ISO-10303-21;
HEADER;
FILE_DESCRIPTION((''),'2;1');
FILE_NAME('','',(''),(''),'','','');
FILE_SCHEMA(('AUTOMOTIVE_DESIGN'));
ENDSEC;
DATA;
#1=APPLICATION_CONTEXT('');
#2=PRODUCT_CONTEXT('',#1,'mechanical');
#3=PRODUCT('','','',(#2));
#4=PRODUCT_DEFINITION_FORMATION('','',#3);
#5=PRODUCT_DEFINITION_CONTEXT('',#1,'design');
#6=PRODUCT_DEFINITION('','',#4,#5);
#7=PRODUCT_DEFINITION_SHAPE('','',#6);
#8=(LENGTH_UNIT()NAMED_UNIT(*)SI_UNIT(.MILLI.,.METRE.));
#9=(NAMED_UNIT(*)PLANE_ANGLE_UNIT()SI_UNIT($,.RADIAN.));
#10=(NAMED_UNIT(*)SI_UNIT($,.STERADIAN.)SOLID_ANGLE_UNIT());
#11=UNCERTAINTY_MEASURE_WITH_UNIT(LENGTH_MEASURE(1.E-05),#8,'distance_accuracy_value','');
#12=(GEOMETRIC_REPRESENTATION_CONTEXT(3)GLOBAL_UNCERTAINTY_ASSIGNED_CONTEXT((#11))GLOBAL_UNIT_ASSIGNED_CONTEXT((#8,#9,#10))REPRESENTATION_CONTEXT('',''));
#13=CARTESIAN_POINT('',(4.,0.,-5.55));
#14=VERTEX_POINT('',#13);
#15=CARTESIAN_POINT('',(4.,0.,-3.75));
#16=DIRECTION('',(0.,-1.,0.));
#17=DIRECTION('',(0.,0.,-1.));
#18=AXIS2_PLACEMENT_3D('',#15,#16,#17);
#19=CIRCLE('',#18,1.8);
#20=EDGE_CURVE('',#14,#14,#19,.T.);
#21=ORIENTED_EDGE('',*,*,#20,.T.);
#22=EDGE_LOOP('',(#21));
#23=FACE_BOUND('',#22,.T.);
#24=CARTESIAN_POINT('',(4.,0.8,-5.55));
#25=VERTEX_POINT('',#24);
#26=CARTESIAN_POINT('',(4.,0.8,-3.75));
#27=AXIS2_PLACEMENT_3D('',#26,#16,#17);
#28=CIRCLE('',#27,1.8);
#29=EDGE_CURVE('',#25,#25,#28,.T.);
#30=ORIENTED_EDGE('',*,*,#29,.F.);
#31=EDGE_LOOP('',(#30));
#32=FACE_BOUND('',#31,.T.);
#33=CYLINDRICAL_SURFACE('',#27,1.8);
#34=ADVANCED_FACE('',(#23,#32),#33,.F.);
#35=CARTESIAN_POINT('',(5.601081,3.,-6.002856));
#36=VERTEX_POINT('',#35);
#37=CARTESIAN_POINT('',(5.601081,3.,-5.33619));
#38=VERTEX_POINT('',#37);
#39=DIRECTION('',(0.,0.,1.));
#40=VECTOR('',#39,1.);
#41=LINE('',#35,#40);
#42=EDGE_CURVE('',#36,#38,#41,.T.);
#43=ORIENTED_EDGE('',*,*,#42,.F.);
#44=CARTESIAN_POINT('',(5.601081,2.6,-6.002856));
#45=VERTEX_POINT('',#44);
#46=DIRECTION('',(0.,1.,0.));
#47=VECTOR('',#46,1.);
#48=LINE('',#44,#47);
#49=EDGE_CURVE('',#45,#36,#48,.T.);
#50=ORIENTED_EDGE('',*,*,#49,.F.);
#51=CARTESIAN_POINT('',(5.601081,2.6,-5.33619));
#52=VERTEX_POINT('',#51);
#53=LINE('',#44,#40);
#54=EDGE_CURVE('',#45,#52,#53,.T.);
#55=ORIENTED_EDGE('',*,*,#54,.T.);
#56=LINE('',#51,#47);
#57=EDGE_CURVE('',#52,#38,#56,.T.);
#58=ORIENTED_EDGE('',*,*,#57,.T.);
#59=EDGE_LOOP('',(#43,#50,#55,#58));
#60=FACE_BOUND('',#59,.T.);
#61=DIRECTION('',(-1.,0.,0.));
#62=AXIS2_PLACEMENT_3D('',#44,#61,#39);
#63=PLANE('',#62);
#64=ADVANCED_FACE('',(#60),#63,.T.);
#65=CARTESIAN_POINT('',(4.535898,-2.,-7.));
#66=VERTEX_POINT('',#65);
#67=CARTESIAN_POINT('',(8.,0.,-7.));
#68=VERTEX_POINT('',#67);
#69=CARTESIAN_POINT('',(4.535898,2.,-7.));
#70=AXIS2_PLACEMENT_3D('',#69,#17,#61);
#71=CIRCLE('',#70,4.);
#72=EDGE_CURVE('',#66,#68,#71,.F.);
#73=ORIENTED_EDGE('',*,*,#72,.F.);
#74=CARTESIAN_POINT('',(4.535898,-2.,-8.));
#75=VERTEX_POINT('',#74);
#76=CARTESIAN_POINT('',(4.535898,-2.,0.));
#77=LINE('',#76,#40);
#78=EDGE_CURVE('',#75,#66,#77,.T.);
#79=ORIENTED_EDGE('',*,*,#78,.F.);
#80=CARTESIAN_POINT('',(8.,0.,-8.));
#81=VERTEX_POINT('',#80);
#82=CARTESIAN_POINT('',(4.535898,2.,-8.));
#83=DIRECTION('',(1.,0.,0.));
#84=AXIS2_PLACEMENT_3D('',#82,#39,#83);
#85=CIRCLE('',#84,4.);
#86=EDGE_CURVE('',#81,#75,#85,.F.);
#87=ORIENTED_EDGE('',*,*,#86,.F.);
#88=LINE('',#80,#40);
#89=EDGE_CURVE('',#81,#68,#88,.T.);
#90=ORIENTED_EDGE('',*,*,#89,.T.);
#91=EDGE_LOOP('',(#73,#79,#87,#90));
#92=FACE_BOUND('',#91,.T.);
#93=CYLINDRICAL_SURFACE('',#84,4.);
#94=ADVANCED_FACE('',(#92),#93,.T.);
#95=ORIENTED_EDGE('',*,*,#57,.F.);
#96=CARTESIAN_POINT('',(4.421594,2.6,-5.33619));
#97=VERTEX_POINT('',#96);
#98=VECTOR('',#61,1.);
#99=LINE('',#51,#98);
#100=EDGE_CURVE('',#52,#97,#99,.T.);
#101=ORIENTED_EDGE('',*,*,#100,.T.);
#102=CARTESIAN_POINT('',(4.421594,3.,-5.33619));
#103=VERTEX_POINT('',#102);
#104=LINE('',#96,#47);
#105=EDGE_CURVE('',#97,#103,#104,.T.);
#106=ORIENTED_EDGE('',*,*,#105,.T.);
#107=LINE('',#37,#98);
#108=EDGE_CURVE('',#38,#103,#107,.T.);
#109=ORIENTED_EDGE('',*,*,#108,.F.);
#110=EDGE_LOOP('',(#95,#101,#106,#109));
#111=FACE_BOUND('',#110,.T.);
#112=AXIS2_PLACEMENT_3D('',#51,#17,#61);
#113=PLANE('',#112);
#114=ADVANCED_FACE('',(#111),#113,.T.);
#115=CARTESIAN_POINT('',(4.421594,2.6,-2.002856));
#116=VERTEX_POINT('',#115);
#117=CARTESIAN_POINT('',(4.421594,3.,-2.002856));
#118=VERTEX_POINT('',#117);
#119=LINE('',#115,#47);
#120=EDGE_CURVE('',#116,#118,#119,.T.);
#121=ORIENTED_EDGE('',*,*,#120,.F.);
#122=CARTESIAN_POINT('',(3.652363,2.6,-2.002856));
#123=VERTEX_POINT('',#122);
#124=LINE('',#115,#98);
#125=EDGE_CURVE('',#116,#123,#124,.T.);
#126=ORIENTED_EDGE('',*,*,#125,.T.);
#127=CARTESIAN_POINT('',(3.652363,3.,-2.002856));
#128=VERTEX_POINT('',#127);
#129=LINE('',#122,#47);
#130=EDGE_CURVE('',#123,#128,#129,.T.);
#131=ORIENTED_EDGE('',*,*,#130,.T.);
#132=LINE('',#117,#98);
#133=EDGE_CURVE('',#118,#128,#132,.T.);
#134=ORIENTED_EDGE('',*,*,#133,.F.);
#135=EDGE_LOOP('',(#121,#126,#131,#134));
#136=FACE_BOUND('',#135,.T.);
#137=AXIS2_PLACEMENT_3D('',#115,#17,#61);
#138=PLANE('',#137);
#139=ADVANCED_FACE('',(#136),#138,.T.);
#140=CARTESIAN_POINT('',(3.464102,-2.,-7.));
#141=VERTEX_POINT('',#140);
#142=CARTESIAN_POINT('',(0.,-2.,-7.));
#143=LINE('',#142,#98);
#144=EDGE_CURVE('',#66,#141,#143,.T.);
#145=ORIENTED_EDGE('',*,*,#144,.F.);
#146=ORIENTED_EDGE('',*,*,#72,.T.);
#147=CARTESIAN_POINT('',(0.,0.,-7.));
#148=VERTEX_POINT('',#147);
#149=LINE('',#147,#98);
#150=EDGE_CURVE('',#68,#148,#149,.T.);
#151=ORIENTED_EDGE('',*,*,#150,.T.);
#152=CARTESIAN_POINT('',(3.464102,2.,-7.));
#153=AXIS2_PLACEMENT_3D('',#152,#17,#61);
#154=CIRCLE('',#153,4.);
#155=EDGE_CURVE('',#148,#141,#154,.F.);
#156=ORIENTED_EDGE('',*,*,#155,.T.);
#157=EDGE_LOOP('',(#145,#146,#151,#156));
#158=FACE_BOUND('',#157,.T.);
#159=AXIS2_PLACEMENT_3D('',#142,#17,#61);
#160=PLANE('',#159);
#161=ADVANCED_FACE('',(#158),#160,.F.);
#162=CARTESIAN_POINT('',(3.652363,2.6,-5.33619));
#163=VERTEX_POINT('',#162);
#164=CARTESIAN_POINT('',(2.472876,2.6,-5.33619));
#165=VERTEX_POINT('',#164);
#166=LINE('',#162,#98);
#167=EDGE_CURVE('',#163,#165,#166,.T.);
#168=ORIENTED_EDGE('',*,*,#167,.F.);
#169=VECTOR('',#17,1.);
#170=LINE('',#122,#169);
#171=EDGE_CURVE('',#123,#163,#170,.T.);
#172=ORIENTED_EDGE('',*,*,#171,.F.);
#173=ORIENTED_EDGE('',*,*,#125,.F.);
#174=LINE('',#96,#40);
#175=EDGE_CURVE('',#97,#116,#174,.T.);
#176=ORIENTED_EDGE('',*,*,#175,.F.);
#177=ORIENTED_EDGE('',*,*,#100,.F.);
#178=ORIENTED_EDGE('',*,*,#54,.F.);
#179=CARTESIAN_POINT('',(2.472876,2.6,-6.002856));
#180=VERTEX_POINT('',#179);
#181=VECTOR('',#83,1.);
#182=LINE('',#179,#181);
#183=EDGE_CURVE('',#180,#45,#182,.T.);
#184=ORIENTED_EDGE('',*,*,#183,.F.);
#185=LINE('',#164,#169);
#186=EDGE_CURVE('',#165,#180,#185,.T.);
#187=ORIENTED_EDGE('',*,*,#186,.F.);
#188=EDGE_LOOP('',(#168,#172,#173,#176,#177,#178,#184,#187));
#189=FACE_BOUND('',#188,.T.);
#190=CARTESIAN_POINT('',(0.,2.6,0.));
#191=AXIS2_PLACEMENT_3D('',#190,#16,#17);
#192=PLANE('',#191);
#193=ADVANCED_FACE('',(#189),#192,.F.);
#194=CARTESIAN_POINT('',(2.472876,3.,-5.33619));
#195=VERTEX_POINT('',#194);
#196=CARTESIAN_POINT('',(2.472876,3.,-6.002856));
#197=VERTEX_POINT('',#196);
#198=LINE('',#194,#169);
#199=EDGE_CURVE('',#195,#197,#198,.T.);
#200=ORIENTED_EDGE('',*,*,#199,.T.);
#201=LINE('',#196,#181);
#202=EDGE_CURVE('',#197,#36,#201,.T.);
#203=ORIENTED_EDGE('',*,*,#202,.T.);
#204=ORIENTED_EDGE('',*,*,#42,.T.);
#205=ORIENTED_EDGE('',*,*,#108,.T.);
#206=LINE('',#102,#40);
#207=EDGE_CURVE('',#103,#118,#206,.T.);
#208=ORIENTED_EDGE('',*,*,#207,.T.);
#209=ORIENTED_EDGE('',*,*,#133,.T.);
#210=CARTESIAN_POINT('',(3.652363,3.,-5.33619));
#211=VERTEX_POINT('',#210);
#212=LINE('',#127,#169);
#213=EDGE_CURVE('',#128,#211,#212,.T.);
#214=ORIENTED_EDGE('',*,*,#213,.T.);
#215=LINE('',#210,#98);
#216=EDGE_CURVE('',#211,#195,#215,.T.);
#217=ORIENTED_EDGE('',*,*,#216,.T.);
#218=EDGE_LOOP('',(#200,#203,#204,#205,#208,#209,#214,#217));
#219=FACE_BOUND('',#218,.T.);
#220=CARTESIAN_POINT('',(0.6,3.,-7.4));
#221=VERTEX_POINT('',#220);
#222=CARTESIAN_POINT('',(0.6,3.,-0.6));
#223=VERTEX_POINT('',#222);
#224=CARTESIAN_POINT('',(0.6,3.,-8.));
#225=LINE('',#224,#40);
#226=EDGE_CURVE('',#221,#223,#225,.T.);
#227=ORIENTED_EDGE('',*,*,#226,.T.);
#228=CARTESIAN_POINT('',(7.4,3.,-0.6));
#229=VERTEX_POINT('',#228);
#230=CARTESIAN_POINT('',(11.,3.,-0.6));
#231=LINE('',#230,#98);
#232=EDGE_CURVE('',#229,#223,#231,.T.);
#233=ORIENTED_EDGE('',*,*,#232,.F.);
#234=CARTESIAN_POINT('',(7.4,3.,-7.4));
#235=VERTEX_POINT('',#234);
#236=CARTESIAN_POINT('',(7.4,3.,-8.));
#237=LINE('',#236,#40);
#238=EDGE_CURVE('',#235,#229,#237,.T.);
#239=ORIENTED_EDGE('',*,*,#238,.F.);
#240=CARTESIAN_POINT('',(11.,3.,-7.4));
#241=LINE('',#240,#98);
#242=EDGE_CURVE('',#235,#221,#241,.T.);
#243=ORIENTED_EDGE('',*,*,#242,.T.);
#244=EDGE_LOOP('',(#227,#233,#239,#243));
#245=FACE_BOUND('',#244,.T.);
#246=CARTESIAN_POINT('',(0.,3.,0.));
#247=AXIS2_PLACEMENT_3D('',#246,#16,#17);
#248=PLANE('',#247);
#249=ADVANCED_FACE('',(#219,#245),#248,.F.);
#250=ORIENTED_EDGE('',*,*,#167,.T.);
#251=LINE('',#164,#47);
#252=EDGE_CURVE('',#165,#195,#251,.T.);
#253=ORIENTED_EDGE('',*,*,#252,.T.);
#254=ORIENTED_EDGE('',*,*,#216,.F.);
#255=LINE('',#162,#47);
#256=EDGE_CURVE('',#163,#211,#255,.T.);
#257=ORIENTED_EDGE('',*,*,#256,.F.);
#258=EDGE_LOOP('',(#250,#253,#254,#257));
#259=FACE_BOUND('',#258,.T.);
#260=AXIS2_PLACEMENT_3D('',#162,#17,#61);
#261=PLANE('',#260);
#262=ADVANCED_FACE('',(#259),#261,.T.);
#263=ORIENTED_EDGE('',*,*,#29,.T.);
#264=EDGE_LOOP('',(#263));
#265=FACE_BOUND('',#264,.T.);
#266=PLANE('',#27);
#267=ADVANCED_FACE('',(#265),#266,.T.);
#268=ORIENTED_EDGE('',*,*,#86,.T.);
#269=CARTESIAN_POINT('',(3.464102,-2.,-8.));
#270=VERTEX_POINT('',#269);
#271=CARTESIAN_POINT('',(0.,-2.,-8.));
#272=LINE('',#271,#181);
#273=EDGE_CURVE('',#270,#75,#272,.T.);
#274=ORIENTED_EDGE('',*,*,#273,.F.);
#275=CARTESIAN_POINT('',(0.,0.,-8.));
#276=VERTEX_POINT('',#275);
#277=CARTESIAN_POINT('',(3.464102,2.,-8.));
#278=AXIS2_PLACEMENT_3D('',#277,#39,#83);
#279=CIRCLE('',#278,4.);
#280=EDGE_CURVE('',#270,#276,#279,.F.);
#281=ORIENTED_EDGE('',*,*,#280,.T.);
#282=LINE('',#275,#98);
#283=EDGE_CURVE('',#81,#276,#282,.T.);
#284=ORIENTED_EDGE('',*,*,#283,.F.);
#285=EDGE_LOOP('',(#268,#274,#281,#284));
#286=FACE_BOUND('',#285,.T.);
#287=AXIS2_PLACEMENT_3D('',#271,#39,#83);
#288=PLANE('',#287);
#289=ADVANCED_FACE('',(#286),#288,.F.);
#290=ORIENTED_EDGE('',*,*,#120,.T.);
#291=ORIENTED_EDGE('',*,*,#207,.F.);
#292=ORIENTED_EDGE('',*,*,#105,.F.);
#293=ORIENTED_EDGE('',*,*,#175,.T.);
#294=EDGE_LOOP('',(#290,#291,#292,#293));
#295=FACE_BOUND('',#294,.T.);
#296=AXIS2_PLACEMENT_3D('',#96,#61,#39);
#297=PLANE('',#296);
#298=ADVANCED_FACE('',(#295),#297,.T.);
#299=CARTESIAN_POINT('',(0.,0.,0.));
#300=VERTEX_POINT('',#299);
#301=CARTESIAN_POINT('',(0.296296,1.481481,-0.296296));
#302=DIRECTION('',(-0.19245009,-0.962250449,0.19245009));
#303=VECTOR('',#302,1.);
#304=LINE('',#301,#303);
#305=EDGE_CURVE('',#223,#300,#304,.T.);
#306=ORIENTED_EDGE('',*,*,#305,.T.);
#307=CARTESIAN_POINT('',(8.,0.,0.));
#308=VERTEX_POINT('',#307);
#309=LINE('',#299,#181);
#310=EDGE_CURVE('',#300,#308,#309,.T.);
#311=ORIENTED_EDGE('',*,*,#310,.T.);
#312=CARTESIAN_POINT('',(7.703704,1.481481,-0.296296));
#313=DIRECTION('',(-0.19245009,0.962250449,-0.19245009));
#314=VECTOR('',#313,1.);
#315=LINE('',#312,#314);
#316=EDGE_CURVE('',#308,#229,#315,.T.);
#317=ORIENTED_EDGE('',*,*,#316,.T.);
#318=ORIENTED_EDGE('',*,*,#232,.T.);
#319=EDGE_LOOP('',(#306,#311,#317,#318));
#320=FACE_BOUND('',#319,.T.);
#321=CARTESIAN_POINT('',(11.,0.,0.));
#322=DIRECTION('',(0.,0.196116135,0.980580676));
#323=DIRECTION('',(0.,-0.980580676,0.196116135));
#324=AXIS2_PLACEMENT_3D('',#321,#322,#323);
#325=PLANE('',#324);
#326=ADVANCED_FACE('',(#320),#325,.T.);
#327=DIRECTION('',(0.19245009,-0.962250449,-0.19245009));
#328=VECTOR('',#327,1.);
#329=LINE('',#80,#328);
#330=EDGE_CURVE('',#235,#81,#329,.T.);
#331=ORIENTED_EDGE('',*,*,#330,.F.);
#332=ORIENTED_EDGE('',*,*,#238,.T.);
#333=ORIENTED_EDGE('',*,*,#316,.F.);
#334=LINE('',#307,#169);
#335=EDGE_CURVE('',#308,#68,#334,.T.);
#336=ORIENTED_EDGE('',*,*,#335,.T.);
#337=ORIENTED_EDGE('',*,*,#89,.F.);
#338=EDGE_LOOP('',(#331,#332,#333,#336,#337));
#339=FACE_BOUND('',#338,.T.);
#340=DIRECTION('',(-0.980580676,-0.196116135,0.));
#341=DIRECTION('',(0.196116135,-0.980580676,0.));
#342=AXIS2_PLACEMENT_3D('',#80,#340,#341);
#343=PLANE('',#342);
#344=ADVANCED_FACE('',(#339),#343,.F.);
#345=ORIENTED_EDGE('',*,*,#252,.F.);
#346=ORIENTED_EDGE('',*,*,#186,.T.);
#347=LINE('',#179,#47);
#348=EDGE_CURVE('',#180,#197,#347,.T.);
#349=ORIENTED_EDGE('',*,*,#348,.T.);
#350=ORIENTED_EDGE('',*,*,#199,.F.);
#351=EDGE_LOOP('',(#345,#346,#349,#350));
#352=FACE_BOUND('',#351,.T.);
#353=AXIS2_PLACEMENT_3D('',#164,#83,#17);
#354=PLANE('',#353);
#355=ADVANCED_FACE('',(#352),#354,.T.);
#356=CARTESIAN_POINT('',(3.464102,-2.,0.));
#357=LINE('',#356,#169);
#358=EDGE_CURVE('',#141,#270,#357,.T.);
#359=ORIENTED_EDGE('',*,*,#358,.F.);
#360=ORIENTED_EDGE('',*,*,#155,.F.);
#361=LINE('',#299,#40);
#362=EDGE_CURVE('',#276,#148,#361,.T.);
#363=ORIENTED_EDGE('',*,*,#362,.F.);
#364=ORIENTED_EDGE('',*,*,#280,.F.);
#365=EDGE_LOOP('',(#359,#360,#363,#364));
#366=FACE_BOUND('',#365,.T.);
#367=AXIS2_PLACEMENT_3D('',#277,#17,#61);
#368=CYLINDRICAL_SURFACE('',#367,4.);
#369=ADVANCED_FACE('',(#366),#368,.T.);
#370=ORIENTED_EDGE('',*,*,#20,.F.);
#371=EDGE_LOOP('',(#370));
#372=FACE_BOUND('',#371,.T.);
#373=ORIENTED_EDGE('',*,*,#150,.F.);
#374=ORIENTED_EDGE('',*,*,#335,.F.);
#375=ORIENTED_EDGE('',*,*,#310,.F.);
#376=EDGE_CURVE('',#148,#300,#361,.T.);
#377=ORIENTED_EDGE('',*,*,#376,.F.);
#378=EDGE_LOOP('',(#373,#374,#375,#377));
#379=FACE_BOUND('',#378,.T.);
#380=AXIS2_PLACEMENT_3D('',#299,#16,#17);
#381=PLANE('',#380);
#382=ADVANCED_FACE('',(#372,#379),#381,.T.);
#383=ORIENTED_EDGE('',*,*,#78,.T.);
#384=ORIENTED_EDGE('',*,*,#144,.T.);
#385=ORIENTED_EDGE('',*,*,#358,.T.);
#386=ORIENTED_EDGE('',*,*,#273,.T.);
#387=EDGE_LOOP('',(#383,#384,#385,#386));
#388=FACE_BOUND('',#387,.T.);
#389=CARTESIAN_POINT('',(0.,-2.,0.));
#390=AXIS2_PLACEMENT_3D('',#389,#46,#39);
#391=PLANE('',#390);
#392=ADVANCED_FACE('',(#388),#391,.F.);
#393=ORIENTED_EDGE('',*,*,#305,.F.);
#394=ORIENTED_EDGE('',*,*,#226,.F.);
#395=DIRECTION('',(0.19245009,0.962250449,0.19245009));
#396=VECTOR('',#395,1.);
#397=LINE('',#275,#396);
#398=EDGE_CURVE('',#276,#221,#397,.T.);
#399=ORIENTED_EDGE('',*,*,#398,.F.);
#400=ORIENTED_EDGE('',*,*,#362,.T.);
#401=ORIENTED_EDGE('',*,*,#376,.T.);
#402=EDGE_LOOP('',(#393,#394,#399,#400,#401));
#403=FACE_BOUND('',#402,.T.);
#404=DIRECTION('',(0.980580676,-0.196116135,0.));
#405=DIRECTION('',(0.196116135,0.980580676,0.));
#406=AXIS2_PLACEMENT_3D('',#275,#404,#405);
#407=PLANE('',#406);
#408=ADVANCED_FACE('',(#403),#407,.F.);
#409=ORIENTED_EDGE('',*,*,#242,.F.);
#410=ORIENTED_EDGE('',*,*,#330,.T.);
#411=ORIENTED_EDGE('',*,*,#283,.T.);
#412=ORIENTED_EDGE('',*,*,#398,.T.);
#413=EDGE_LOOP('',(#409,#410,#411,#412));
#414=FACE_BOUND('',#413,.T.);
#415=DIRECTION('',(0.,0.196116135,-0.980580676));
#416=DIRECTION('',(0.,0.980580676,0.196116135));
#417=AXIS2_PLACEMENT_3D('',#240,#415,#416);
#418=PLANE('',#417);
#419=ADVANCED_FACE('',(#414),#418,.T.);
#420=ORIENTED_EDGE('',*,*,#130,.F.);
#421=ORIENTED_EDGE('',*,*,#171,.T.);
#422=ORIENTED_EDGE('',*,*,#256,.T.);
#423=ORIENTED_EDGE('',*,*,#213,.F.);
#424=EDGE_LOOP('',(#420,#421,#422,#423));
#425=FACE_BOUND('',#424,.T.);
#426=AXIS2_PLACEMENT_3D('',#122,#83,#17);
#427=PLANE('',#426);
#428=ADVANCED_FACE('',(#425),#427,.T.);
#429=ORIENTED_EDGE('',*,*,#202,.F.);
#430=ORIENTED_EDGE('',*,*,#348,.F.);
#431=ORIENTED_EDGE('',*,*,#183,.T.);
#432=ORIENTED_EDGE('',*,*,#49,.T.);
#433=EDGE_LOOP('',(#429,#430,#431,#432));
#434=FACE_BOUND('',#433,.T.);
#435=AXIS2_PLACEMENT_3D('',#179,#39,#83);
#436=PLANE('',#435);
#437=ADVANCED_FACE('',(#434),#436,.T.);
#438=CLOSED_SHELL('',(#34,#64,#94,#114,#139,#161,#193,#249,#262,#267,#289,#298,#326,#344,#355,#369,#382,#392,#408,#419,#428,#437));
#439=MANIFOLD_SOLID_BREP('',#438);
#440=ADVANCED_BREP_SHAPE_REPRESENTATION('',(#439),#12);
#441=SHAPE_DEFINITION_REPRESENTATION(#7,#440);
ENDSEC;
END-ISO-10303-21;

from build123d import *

# Parameters (mm, degrees)
SKETCH1_W               = 8
SKETCH1_H               = 8
BOSS_EXTRUDE1_DEPTH     = 3
CUT_EXTRUDE1_DEPTH      = 12.704699911
CUT_EXTRUDE1_DEPTH_BACK = 12.704699911
CUT_EXTRUDE2_DEPTH      = 11
SKETCH4_R               = 1.8
CUT_EXTRUDE3_DEPTH      = 0.8
SKETCH5_W               = 8
SKETCH5_H               = 1
BOSS_EXTRUDE2_DEPTH     = 2
FILLET1_R               = 4
CUT_EXTRUDE4_DEPTH      = 0.4


with BuildPart() as part:
    # Sketch1 → Boss-Extrude1 (new body)
    with BuildSketch(Plane(origin=(0, 0, 0), x_dir=(1, 0, 0), z_dir=(0, 1, 0))):
        with Locations((4, 4)):
            Rectangle(SKETCH1_W, SKETCH1_H)
    extrude(amount=BOSS_EXTRUDE1_DEPTH)

    # Sketch2 → Cut-Extrude1 (cut, two sides: drawn at the far end of the back side and taken through both)
    with BuildSketch(Plane.XY.offset(-CUT_EXTRUDE1_DEPTH_BACK)):
        Polygon((0, 0), (0.6, 3), (0, 3), align=None)
        Polygon((8, 0), (7.4, 3), (8, 3), align=None)
    extrude(amount=CUT_EXTRUDE1_DEPTH + CUT_EXTRUDE1_DEPTH_BACK, mode=Mode.SUBTRACT)

    # Sketch3 → Cut-Extrude2 (cut)
    with BuildSketch(Plane(origin=(0, 0, 0), x_dir=(0, 0, -1), z_dir=(1, 0, 0))):
        Polygon((0, 0), (0.6, 3), (0, 3), align=None)
        Polygon((8, 3), (7.4, 3), (8, 0), align=None)
    extrude(amount=CUT_EXTRUDE2_DEPTH, mode=Mode.SUBTRACT)

    # Sketch4 → Cut-Extrude3 (cut)
    with BuildSketch(Plane.XZ):
        with Locations(Location((4, -3.75, 0), (0, 0, 270))):
            Circle(SKETCH4_R)
    extrude(amount=-CUT_EXTRUDE3_DEPTH, mode=Mode.SUBTRACT)

    # Sketch5 → Boss-Extrude2 (add)
    with BuildSketch(Plane.XZ):
        with Locations((4, -7.5)):
            Rectangle(SKETCH5_W, SKETCH5_H)
    extrude(amount=BOSS_EXTRUDE2_DEPTH)

    # Fillet1
    # the kernel refuses this fillet: 4 mm, written as the material it takes off along each edge
    with BuildSketch(Plane(origin=(8, -2, -16.660254038), x_dir=(0, 1, 0), z_dir=(0, 0, 1)), Plane(origin=(0, -2, 1.660254038), x_dir=(0, 1, 0), z_dir=(0, 0, -1))) as fillet1_piece_1:
        with BuildLine():
            CenterArc((4, 3.464101615), FILLET1_R, 180, 60)
            Line((0, 3.464101615), (-0.08, 3.464101615))
            Line((-0.08, 3.464101615), (-0.08, 0))
            Line((-0.08, 0), (0, -0.08))
            ThreePointArc((0, -0.08), (1, -0.08), (1.96, -0.069282032))
            Line((1.96, -0.069282032), (2, 0))
        make_face()
    extrude(amount=18.320508076, mode=Mode.SUBTRACT)

    # Sketch6 → Cut-Extrude4 (cut)
    with BuildSketch(Plane(origin=(0, 3, 0), x_dir=(1, 0, 0), z_dir=(0, 1, 0))):
        Polygon((3.652362984, 2.002856352), (3.652362984, 5.336189685), (2.472875805, 5.336189685), (2.472875805, 6.002856352), (5.601080933, 6.002856352), (5.601080933, 5.336189685), (4.421593754, 5.336189685), (4.421593754, 2.002856352), align=None)
    extrude(amount=-CUT_EXTRUDE4_DEPTH, mode=Mode.SUBTRACT)


solid = part.part
